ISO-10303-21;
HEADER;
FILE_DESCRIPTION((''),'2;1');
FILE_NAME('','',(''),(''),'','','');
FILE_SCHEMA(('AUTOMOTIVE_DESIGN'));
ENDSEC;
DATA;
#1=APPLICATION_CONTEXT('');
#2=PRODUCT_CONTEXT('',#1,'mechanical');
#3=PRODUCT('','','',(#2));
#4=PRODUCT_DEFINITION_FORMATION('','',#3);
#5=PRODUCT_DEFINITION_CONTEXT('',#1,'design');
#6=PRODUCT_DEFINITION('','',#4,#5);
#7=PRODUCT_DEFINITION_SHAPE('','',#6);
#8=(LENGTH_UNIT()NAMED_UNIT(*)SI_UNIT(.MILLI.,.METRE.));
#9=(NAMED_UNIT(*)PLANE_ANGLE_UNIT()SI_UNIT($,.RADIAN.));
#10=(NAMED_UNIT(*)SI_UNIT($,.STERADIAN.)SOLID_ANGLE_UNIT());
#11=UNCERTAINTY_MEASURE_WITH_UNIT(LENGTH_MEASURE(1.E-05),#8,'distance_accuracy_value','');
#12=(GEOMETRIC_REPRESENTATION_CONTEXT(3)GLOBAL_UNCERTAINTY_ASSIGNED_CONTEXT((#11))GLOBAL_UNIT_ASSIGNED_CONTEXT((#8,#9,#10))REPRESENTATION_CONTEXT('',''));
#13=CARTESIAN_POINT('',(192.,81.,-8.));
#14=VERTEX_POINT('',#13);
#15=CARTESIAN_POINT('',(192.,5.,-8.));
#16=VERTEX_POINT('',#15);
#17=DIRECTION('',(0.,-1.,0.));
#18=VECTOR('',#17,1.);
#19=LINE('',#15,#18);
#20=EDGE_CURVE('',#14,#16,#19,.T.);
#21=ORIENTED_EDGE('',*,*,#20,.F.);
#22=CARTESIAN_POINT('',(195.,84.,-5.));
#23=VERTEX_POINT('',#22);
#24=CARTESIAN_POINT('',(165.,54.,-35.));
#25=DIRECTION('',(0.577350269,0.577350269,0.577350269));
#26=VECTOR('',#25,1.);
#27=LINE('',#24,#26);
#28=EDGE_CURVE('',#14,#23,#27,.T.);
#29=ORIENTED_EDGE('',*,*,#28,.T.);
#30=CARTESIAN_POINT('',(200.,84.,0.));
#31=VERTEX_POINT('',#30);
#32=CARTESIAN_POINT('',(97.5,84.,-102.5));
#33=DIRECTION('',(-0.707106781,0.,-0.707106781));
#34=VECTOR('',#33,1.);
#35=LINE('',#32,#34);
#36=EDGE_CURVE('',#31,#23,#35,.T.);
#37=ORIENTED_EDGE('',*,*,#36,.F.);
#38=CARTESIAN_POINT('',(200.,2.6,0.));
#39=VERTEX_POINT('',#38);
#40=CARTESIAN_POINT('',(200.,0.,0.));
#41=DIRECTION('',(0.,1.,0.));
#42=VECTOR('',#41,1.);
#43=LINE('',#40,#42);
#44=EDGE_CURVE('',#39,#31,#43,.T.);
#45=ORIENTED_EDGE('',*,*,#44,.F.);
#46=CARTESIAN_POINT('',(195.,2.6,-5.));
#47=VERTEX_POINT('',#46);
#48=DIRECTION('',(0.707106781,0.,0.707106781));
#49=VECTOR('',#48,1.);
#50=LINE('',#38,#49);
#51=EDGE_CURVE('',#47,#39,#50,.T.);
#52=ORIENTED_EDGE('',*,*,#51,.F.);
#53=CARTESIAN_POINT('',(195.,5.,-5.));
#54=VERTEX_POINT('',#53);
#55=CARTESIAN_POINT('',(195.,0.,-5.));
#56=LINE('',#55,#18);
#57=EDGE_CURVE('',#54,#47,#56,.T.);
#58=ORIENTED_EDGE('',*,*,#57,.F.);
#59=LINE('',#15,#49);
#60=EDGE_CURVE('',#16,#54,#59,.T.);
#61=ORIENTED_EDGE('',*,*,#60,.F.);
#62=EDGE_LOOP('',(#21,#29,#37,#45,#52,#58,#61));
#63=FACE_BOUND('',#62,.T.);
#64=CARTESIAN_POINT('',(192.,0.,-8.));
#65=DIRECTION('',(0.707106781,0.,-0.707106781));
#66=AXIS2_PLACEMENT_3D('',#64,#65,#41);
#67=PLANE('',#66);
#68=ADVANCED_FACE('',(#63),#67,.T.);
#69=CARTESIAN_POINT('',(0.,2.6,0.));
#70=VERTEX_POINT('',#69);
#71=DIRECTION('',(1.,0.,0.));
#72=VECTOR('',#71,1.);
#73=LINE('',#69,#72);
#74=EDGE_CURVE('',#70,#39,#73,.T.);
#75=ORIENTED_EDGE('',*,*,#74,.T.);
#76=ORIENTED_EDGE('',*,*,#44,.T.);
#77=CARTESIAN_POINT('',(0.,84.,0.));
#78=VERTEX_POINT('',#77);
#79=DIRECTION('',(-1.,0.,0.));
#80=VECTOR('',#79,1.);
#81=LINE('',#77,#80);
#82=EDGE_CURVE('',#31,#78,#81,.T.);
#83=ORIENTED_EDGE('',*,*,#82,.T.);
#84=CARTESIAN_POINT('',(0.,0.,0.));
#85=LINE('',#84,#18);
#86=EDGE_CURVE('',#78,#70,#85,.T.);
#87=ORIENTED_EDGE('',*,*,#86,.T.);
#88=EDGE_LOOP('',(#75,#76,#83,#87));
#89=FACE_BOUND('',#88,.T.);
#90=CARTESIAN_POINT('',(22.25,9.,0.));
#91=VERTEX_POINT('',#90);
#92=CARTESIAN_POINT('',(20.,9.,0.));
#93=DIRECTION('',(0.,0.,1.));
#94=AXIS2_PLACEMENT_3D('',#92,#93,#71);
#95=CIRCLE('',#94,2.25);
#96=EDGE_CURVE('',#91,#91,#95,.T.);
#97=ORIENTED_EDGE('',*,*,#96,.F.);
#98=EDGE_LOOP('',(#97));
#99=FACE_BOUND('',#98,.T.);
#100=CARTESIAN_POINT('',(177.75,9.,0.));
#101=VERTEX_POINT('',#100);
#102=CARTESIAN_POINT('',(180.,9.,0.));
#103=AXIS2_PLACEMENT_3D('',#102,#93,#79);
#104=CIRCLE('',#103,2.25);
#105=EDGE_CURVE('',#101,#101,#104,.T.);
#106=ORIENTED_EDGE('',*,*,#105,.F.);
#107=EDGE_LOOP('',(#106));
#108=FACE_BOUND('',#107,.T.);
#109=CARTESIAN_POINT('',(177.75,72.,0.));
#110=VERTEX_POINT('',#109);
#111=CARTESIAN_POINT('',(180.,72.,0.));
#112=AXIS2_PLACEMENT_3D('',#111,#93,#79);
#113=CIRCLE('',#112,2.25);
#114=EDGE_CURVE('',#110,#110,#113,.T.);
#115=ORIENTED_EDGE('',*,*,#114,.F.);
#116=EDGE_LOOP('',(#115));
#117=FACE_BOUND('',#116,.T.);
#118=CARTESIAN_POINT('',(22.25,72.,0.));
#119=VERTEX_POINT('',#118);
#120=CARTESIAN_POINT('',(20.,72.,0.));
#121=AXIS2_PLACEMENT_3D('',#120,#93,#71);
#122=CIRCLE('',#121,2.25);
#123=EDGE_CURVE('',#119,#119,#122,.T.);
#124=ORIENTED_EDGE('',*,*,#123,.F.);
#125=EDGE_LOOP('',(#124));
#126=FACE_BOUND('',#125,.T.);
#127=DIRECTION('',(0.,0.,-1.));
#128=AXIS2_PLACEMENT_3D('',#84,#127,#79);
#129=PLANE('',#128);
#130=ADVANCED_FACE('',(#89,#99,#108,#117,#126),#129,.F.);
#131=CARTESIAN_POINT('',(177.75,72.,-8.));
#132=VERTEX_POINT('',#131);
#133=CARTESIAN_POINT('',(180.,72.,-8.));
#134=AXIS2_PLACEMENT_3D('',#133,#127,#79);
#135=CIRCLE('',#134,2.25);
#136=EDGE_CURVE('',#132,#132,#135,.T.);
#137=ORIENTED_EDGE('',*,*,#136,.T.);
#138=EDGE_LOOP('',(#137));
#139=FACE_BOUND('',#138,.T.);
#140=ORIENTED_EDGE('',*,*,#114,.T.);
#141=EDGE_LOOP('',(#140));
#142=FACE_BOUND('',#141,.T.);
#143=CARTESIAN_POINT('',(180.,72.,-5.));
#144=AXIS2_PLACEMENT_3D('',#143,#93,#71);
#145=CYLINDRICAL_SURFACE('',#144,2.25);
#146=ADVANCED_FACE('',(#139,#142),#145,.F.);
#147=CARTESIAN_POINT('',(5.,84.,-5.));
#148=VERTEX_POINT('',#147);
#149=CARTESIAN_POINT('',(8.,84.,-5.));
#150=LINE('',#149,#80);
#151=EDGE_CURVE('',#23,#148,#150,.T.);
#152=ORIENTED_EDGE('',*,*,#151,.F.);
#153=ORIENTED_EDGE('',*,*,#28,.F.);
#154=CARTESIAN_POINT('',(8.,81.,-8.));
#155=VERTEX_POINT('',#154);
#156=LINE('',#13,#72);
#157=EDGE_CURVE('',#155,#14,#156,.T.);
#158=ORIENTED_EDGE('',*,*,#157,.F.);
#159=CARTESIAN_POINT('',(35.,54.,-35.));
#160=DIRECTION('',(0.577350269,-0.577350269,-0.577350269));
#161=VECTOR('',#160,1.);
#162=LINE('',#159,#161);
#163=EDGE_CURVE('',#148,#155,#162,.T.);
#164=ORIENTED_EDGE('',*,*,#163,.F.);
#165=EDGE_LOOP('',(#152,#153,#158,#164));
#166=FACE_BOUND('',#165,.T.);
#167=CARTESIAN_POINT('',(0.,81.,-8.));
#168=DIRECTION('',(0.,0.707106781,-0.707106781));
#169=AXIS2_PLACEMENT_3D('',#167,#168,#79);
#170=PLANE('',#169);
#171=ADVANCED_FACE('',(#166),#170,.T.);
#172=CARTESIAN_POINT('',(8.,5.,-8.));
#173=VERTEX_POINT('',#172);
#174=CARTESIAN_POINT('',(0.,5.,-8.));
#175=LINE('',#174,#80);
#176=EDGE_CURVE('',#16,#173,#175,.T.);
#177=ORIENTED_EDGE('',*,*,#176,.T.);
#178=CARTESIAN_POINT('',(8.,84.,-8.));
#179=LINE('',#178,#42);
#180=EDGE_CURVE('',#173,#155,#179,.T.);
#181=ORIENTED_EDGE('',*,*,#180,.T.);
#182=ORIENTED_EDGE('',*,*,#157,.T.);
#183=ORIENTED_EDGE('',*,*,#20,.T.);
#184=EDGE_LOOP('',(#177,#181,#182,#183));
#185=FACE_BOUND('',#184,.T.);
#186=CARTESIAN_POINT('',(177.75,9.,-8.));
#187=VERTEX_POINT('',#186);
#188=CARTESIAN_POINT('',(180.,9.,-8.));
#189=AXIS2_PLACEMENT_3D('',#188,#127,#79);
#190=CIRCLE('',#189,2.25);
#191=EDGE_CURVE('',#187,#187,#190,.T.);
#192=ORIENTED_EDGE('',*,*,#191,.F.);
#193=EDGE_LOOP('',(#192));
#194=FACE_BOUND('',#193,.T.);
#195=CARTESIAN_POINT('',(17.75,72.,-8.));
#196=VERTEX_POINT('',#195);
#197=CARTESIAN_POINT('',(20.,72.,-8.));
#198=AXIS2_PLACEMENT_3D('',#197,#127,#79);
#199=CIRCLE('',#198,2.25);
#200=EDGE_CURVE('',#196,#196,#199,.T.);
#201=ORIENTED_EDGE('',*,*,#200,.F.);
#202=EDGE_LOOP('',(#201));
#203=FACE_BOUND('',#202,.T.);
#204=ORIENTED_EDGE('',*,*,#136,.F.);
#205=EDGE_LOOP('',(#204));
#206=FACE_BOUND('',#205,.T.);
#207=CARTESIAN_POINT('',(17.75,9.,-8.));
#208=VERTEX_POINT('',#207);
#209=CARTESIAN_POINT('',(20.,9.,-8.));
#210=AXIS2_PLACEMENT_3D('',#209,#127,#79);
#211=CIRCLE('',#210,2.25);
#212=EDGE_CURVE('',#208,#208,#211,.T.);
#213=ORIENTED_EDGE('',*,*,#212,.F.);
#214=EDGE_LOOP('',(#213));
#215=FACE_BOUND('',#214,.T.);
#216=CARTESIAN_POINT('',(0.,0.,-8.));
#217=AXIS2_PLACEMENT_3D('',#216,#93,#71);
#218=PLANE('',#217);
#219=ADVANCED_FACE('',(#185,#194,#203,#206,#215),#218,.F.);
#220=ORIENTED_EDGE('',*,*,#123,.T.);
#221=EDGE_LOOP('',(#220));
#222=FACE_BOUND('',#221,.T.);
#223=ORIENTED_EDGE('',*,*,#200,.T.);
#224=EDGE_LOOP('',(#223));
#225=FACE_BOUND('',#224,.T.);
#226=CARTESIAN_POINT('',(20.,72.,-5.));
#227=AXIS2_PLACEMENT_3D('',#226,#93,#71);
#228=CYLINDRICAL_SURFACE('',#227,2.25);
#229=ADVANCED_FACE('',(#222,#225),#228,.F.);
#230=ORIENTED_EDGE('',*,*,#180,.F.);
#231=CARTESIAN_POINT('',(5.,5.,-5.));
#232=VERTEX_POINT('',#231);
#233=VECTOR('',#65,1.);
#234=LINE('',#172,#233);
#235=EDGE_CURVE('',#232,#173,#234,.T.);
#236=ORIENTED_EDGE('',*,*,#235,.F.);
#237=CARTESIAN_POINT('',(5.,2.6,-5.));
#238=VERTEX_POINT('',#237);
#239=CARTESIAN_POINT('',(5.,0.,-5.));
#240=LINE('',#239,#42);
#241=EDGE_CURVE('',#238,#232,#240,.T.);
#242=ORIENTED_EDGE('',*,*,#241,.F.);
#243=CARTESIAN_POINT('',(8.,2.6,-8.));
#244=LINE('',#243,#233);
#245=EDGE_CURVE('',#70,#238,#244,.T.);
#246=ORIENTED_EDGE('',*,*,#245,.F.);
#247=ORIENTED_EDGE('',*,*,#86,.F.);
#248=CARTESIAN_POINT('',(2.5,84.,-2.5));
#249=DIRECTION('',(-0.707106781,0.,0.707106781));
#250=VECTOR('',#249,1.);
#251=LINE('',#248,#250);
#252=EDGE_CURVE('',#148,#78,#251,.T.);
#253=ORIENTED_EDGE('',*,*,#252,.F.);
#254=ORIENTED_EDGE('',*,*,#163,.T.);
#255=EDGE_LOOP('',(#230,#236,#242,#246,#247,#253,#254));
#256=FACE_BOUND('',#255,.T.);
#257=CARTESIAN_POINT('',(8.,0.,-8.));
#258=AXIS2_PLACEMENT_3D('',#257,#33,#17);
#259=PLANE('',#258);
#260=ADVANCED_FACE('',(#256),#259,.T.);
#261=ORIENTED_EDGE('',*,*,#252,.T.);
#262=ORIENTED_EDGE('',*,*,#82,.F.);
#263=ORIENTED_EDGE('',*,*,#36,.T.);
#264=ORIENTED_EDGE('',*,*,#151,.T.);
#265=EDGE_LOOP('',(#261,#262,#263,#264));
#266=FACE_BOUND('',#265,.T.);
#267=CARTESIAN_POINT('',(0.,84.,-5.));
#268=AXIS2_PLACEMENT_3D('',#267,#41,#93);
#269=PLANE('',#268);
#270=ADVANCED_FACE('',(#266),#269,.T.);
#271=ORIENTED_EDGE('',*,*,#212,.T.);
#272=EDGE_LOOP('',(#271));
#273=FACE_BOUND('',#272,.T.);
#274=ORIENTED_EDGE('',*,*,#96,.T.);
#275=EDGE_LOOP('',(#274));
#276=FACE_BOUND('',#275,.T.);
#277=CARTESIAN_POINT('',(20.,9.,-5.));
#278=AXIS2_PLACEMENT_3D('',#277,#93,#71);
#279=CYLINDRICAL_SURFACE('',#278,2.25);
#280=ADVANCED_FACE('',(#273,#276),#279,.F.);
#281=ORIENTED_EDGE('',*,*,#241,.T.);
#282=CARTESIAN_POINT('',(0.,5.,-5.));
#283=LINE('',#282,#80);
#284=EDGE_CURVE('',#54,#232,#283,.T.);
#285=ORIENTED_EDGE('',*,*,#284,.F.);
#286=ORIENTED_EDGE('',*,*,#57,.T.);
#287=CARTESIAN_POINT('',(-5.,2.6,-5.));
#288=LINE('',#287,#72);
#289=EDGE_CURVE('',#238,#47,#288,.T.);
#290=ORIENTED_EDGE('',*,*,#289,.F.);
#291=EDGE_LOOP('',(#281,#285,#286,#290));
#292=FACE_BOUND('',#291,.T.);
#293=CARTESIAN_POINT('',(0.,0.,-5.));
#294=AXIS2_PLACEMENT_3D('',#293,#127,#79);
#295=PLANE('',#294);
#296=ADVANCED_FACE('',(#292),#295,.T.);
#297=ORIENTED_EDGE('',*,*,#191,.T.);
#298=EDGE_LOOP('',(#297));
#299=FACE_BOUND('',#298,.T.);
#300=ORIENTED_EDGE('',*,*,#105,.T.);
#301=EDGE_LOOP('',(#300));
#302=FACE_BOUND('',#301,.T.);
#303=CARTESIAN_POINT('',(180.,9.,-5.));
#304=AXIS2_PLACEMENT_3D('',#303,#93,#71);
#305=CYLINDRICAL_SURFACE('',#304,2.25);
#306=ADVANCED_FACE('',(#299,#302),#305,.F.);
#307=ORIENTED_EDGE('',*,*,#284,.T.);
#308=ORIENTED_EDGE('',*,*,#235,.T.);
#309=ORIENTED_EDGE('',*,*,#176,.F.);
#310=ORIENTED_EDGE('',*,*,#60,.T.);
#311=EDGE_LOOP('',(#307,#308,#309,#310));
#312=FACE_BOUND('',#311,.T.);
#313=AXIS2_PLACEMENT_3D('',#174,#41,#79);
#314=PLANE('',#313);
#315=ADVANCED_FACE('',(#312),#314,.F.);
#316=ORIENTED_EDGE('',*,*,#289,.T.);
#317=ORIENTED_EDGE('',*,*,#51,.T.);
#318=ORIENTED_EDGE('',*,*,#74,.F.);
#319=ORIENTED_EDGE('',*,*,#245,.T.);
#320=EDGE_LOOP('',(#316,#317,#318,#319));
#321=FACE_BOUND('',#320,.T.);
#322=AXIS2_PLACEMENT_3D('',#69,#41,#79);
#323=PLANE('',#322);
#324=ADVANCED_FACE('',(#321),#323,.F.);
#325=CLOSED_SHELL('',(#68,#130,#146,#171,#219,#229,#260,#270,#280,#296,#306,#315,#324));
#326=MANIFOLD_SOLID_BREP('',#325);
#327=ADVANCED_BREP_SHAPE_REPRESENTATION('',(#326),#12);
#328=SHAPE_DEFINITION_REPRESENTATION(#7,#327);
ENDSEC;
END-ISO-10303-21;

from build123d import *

# Parameters (mm, degrees)
SKETCH1_W           = 200
SKETCH1_H           = 84
SKETCH1_R           = 2.25
BOSS_EXTRUDE1_DEPTH = 5
SKETCH2_W           = 200
SKETCH2_H           = 79
SKETCH2_R           = 2.25
BOSS_EXTRUDE2_DEPTH = 3
CHAMFER1_SIZE       = 8
CHAMFER3_SIZE       = 3
SKETCH3_W           = 7.071067812
SKETCH3_H           = 2.6
CUT_EXTRUDE1_DEPTH  = 234.034075139


with BuildPart() as part:
    # Sketch1 → Boss-Extrude1 (new body)
    with BuildSketch(Plane.XY):
        with Locations((100, 42)):
            Rectangle(SKETCH1_W, SKETCH1_H)
        with Locations((20, 9)):
            Circle(SKETCH1_R, mode=Mode.SUBTRACT)
        with Locations(Location((180, 9, 0), (0, 0, 180))):
            Circle(SKETCH1_R, mode=Mode.SUBTRACT)
        with Locations((20, 72)):
            Circle(SKETCH1_R, mode=Mode.SUBTRACT)
        with Locations(Location((180, 72, 0), (0, 0, 180))):
            Circle(SKETCH1_R, mode=Mode.SUBTRACT)
    extrude(amount=-BOSS_EXTRUDE1_DEPTH)

    # Sketch2 → Boss-Extrude2 (add)
    with BuildSketch(Plane(origin=(0, 0, -5), x_dir=(-1, 0, 0), z_dir=(0, 0, -1))):
        with Locations((-100, 44.5)):
            Rectangle(SKETCH2_W, SKETCH2_H)
        with Locations(Location((-20, 9, 0), (0, 0, 180))):
            Circle(SKETCH2_R, mode=Mode.SUBTRACT)
        with Locations((-180, 9)):
            Circle(SKETCH2_R, mode=Mode.SUBTRACT)
        with Locations(Location((-20, 72, 0), (0, 0, 180))):
            Circle(SKETCH2_R, mode=Mode.SUBTRACT)
        with Locations((-180, 72)):
            Circle(SKETCH2_R, mode=Mode.SUBTRACT)
    extrude(amount=BOSS_EXTRUDE2_DEPTH)

    # Chamfer1
    # the kernel refuses this chamfer: 8 mm, written as the material it takes off along each edge
    with BuildSketch(Plane(origin=(200, -15.573463904, -8), x_dir=(-0.9996219169112968, 0, -0.027495876610586296), z_dir=(0, 1, 0)), Plane(origin=(0, 104.573463904, -8), x_dir=(0.9996219169112968, 0, -0.027495876610586275), z_dir=(0, -1, 0))) as chamfer1_piece_1:
        Polygon((CHAMFER1_SIZE * 0.999621916911, CHAMFER1_SIZE * 0.0274958766106), (-CHAMFER1_SIZE * 0.0274958766106, CHAMFER1_SIZE * 0.999621916911), (0, 0), align=None)
    extrude(amount=120.146927807, mode=Mode.SUBTRACT)

    # Chamfer3
    chamfer3_edges = [part.edges().sort_by_distance(p)[0] for p in [
        (100, 84, -8),
    ]]
    chamfer(chamfer3_edges, length=CHAMFER3_SIZE)

    # Sketch3 → Cut-Extrude1 (cut, through all, along a direction that is not the sketch's normal)
    with BuildSketch(Plane(origin=(100, 0, -100), x_dir=(-0.7071067811865452, 0, -0.7071067811865498), z_dir=(0.7071067811865498, 0, -0.7071067811865452))):
        with Locations((-137.885822331, 1.3)):
            Rectangle(SKETCH3_W, SKETCH3_H)
    extrude(amount=-CUT_EXTRUDE1_DEPTH, dir=(1, 0, 0), mode=Mode.SUBTRACT)


solid = part.part
